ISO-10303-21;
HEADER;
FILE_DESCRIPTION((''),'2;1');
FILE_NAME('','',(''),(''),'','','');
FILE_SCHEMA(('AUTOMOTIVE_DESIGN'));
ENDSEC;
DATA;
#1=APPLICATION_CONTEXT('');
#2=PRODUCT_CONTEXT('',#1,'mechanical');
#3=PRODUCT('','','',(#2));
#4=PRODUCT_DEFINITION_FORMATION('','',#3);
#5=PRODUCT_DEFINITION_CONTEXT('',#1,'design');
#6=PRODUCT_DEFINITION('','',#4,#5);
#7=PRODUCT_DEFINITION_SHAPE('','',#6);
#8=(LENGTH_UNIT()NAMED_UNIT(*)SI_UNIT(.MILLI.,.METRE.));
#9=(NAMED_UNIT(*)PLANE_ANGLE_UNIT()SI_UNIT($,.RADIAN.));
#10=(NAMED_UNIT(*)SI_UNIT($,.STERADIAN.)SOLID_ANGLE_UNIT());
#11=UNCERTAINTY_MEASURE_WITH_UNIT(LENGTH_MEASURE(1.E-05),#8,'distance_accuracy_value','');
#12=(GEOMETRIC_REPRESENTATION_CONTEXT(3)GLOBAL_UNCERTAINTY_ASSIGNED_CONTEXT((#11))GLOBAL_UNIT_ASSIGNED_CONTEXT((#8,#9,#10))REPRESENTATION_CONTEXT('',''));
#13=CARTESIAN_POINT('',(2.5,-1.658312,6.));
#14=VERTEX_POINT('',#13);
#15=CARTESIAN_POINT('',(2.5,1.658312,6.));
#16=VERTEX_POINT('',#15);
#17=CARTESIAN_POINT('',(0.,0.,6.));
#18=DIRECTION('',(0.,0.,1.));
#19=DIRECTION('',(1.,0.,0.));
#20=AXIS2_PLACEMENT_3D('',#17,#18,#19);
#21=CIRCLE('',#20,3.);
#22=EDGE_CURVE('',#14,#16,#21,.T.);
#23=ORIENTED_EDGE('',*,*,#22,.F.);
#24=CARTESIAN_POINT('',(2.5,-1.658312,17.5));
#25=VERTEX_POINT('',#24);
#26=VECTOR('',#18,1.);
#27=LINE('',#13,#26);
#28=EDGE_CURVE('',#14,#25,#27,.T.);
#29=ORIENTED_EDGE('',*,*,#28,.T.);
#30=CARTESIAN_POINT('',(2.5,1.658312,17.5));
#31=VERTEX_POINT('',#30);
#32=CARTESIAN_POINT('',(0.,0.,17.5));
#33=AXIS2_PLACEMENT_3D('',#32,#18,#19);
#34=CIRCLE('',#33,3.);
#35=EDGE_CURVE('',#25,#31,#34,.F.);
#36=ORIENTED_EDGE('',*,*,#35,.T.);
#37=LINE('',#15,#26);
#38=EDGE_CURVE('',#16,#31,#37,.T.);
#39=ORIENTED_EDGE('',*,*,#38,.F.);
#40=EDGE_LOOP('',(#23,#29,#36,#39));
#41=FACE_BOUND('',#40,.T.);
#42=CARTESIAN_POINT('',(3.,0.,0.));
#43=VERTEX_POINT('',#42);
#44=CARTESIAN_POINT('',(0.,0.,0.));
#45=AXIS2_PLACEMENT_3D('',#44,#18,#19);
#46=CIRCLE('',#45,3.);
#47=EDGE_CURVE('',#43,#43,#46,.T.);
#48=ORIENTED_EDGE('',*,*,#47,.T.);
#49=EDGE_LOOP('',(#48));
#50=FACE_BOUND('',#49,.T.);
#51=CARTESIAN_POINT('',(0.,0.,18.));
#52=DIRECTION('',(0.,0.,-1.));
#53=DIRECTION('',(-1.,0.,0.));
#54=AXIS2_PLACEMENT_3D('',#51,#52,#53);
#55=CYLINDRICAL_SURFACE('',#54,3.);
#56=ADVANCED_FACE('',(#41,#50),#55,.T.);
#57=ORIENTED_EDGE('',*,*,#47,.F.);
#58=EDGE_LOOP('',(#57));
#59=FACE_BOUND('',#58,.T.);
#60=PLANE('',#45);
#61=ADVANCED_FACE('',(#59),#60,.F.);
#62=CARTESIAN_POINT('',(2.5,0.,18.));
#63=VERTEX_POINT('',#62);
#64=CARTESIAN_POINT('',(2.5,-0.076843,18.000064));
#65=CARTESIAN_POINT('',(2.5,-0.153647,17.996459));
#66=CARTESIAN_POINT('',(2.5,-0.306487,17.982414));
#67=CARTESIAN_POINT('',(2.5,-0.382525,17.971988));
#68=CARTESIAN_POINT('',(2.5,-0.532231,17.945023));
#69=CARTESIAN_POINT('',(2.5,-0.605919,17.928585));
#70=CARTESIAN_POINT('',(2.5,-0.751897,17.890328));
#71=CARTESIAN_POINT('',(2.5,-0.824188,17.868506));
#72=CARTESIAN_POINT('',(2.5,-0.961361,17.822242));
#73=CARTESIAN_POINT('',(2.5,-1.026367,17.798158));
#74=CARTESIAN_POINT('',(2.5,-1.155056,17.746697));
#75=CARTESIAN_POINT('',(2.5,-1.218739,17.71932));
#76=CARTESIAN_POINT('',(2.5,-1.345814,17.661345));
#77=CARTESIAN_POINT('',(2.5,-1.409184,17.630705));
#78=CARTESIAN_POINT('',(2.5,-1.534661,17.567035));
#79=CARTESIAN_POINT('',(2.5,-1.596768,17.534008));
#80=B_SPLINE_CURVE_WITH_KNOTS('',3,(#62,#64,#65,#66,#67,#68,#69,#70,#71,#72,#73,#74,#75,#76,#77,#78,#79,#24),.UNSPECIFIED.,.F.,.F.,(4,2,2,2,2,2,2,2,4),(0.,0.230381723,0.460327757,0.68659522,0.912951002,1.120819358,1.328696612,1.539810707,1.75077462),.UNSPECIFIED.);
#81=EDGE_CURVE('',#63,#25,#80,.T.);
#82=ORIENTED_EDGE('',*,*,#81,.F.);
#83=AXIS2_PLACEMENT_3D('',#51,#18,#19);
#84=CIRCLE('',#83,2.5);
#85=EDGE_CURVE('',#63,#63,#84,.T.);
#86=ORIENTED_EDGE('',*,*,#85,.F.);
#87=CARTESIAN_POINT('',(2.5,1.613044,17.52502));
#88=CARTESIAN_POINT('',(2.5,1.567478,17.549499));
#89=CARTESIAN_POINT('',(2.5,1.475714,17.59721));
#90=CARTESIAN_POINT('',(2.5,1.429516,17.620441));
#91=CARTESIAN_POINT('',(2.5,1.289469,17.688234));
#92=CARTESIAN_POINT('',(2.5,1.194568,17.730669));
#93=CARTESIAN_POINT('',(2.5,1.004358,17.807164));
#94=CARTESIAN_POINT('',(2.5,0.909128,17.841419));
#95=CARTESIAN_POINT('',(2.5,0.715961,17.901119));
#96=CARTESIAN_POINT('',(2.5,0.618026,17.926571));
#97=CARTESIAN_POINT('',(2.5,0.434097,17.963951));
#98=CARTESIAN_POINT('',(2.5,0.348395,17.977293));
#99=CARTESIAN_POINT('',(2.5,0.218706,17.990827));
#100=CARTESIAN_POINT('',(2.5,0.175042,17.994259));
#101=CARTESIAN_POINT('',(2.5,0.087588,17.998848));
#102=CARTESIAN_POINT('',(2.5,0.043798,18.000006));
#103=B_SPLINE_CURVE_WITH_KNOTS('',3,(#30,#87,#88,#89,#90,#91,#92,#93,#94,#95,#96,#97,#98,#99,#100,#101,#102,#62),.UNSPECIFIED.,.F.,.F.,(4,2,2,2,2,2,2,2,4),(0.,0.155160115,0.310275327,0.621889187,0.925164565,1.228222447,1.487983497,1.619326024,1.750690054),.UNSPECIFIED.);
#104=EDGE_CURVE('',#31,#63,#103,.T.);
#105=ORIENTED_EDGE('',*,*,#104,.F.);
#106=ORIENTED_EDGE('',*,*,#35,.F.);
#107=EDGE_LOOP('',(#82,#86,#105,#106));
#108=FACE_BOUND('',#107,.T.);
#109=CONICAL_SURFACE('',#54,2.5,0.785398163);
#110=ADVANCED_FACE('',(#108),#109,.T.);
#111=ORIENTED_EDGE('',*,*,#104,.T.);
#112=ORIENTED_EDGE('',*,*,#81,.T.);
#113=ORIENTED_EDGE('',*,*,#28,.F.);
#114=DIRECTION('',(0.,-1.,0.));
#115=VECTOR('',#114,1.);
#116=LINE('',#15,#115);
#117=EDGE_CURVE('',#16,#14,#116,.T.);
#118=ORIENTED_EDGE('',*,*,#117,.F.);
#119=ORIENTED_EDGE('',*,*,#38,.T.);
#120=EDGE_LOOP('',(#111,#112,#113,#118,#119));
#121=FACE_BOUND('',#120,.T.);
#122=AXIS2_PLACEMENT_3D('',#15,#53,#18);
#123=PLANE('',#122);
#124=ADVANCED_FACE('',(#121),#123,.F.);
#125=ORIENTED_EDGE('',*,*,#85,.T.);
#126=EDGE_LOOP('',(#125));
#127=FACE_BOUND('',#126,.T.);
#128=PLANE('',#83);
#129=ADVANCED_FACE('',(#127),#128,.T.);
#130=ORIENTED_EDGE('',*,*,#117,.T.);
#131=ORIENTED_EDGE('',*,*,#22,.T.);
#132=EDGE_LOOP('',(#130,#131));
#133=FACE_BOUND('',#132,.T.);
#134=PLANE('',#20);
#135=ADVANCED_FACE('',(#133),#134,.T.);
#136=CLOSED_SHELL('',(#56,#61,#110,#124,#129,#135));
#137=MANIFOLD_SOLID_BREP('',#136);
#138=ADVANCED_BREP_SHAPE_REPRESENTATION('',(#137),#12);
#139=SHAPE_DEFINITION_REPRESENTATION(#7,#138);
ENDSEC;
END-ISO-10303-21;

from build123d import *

# Parameters (mm, degrees)
SKETCH1_R           = 3
BOSS_EXTRUDE1_DEPTH = 18
CUT_EXTRUDE1_START  = -12
CUT_EXTRUDE1_DEPTH  = 12
CHAMFER1_SIZE       = 0.5


with BuildPart() as part:
    # Sketch1 → Boss-Extrude1 (new body)
    with BuildSketch(Plane.XY):
        Circle(SKETCH1_R)
    extrude(amount=BOSS_EXTRUDE1_DEPTH)

    # Sketch2 → Cut-Extrude1 (cut)
    with BuildSketch(Plane.XY.offset(18).offset(CUT_EXTRUDE1_START)):
        with BuildLine():
            Line((2.5, 1.658312395), (2.5, -1.658312395))
            ThreePointArc((2.5, -1.658312395), (3, 0), (2.5, 1.658312395))
        make_face()
    extrude(amount=CUT_EXTRUDE1_DEPTH, mode=Mode.SUBTRACT)

    # Chamfer1
    chamfer1_edges = [part.edges().sort_by_distance(p)[0] for p in [
        (-3, 0, 18),
    ]]
    chamfer(chamfer1_edges, length=CHAMFER1_SIZE - 0.0001)  # a hair under: the kernel refuses the full size


solid = part.part
